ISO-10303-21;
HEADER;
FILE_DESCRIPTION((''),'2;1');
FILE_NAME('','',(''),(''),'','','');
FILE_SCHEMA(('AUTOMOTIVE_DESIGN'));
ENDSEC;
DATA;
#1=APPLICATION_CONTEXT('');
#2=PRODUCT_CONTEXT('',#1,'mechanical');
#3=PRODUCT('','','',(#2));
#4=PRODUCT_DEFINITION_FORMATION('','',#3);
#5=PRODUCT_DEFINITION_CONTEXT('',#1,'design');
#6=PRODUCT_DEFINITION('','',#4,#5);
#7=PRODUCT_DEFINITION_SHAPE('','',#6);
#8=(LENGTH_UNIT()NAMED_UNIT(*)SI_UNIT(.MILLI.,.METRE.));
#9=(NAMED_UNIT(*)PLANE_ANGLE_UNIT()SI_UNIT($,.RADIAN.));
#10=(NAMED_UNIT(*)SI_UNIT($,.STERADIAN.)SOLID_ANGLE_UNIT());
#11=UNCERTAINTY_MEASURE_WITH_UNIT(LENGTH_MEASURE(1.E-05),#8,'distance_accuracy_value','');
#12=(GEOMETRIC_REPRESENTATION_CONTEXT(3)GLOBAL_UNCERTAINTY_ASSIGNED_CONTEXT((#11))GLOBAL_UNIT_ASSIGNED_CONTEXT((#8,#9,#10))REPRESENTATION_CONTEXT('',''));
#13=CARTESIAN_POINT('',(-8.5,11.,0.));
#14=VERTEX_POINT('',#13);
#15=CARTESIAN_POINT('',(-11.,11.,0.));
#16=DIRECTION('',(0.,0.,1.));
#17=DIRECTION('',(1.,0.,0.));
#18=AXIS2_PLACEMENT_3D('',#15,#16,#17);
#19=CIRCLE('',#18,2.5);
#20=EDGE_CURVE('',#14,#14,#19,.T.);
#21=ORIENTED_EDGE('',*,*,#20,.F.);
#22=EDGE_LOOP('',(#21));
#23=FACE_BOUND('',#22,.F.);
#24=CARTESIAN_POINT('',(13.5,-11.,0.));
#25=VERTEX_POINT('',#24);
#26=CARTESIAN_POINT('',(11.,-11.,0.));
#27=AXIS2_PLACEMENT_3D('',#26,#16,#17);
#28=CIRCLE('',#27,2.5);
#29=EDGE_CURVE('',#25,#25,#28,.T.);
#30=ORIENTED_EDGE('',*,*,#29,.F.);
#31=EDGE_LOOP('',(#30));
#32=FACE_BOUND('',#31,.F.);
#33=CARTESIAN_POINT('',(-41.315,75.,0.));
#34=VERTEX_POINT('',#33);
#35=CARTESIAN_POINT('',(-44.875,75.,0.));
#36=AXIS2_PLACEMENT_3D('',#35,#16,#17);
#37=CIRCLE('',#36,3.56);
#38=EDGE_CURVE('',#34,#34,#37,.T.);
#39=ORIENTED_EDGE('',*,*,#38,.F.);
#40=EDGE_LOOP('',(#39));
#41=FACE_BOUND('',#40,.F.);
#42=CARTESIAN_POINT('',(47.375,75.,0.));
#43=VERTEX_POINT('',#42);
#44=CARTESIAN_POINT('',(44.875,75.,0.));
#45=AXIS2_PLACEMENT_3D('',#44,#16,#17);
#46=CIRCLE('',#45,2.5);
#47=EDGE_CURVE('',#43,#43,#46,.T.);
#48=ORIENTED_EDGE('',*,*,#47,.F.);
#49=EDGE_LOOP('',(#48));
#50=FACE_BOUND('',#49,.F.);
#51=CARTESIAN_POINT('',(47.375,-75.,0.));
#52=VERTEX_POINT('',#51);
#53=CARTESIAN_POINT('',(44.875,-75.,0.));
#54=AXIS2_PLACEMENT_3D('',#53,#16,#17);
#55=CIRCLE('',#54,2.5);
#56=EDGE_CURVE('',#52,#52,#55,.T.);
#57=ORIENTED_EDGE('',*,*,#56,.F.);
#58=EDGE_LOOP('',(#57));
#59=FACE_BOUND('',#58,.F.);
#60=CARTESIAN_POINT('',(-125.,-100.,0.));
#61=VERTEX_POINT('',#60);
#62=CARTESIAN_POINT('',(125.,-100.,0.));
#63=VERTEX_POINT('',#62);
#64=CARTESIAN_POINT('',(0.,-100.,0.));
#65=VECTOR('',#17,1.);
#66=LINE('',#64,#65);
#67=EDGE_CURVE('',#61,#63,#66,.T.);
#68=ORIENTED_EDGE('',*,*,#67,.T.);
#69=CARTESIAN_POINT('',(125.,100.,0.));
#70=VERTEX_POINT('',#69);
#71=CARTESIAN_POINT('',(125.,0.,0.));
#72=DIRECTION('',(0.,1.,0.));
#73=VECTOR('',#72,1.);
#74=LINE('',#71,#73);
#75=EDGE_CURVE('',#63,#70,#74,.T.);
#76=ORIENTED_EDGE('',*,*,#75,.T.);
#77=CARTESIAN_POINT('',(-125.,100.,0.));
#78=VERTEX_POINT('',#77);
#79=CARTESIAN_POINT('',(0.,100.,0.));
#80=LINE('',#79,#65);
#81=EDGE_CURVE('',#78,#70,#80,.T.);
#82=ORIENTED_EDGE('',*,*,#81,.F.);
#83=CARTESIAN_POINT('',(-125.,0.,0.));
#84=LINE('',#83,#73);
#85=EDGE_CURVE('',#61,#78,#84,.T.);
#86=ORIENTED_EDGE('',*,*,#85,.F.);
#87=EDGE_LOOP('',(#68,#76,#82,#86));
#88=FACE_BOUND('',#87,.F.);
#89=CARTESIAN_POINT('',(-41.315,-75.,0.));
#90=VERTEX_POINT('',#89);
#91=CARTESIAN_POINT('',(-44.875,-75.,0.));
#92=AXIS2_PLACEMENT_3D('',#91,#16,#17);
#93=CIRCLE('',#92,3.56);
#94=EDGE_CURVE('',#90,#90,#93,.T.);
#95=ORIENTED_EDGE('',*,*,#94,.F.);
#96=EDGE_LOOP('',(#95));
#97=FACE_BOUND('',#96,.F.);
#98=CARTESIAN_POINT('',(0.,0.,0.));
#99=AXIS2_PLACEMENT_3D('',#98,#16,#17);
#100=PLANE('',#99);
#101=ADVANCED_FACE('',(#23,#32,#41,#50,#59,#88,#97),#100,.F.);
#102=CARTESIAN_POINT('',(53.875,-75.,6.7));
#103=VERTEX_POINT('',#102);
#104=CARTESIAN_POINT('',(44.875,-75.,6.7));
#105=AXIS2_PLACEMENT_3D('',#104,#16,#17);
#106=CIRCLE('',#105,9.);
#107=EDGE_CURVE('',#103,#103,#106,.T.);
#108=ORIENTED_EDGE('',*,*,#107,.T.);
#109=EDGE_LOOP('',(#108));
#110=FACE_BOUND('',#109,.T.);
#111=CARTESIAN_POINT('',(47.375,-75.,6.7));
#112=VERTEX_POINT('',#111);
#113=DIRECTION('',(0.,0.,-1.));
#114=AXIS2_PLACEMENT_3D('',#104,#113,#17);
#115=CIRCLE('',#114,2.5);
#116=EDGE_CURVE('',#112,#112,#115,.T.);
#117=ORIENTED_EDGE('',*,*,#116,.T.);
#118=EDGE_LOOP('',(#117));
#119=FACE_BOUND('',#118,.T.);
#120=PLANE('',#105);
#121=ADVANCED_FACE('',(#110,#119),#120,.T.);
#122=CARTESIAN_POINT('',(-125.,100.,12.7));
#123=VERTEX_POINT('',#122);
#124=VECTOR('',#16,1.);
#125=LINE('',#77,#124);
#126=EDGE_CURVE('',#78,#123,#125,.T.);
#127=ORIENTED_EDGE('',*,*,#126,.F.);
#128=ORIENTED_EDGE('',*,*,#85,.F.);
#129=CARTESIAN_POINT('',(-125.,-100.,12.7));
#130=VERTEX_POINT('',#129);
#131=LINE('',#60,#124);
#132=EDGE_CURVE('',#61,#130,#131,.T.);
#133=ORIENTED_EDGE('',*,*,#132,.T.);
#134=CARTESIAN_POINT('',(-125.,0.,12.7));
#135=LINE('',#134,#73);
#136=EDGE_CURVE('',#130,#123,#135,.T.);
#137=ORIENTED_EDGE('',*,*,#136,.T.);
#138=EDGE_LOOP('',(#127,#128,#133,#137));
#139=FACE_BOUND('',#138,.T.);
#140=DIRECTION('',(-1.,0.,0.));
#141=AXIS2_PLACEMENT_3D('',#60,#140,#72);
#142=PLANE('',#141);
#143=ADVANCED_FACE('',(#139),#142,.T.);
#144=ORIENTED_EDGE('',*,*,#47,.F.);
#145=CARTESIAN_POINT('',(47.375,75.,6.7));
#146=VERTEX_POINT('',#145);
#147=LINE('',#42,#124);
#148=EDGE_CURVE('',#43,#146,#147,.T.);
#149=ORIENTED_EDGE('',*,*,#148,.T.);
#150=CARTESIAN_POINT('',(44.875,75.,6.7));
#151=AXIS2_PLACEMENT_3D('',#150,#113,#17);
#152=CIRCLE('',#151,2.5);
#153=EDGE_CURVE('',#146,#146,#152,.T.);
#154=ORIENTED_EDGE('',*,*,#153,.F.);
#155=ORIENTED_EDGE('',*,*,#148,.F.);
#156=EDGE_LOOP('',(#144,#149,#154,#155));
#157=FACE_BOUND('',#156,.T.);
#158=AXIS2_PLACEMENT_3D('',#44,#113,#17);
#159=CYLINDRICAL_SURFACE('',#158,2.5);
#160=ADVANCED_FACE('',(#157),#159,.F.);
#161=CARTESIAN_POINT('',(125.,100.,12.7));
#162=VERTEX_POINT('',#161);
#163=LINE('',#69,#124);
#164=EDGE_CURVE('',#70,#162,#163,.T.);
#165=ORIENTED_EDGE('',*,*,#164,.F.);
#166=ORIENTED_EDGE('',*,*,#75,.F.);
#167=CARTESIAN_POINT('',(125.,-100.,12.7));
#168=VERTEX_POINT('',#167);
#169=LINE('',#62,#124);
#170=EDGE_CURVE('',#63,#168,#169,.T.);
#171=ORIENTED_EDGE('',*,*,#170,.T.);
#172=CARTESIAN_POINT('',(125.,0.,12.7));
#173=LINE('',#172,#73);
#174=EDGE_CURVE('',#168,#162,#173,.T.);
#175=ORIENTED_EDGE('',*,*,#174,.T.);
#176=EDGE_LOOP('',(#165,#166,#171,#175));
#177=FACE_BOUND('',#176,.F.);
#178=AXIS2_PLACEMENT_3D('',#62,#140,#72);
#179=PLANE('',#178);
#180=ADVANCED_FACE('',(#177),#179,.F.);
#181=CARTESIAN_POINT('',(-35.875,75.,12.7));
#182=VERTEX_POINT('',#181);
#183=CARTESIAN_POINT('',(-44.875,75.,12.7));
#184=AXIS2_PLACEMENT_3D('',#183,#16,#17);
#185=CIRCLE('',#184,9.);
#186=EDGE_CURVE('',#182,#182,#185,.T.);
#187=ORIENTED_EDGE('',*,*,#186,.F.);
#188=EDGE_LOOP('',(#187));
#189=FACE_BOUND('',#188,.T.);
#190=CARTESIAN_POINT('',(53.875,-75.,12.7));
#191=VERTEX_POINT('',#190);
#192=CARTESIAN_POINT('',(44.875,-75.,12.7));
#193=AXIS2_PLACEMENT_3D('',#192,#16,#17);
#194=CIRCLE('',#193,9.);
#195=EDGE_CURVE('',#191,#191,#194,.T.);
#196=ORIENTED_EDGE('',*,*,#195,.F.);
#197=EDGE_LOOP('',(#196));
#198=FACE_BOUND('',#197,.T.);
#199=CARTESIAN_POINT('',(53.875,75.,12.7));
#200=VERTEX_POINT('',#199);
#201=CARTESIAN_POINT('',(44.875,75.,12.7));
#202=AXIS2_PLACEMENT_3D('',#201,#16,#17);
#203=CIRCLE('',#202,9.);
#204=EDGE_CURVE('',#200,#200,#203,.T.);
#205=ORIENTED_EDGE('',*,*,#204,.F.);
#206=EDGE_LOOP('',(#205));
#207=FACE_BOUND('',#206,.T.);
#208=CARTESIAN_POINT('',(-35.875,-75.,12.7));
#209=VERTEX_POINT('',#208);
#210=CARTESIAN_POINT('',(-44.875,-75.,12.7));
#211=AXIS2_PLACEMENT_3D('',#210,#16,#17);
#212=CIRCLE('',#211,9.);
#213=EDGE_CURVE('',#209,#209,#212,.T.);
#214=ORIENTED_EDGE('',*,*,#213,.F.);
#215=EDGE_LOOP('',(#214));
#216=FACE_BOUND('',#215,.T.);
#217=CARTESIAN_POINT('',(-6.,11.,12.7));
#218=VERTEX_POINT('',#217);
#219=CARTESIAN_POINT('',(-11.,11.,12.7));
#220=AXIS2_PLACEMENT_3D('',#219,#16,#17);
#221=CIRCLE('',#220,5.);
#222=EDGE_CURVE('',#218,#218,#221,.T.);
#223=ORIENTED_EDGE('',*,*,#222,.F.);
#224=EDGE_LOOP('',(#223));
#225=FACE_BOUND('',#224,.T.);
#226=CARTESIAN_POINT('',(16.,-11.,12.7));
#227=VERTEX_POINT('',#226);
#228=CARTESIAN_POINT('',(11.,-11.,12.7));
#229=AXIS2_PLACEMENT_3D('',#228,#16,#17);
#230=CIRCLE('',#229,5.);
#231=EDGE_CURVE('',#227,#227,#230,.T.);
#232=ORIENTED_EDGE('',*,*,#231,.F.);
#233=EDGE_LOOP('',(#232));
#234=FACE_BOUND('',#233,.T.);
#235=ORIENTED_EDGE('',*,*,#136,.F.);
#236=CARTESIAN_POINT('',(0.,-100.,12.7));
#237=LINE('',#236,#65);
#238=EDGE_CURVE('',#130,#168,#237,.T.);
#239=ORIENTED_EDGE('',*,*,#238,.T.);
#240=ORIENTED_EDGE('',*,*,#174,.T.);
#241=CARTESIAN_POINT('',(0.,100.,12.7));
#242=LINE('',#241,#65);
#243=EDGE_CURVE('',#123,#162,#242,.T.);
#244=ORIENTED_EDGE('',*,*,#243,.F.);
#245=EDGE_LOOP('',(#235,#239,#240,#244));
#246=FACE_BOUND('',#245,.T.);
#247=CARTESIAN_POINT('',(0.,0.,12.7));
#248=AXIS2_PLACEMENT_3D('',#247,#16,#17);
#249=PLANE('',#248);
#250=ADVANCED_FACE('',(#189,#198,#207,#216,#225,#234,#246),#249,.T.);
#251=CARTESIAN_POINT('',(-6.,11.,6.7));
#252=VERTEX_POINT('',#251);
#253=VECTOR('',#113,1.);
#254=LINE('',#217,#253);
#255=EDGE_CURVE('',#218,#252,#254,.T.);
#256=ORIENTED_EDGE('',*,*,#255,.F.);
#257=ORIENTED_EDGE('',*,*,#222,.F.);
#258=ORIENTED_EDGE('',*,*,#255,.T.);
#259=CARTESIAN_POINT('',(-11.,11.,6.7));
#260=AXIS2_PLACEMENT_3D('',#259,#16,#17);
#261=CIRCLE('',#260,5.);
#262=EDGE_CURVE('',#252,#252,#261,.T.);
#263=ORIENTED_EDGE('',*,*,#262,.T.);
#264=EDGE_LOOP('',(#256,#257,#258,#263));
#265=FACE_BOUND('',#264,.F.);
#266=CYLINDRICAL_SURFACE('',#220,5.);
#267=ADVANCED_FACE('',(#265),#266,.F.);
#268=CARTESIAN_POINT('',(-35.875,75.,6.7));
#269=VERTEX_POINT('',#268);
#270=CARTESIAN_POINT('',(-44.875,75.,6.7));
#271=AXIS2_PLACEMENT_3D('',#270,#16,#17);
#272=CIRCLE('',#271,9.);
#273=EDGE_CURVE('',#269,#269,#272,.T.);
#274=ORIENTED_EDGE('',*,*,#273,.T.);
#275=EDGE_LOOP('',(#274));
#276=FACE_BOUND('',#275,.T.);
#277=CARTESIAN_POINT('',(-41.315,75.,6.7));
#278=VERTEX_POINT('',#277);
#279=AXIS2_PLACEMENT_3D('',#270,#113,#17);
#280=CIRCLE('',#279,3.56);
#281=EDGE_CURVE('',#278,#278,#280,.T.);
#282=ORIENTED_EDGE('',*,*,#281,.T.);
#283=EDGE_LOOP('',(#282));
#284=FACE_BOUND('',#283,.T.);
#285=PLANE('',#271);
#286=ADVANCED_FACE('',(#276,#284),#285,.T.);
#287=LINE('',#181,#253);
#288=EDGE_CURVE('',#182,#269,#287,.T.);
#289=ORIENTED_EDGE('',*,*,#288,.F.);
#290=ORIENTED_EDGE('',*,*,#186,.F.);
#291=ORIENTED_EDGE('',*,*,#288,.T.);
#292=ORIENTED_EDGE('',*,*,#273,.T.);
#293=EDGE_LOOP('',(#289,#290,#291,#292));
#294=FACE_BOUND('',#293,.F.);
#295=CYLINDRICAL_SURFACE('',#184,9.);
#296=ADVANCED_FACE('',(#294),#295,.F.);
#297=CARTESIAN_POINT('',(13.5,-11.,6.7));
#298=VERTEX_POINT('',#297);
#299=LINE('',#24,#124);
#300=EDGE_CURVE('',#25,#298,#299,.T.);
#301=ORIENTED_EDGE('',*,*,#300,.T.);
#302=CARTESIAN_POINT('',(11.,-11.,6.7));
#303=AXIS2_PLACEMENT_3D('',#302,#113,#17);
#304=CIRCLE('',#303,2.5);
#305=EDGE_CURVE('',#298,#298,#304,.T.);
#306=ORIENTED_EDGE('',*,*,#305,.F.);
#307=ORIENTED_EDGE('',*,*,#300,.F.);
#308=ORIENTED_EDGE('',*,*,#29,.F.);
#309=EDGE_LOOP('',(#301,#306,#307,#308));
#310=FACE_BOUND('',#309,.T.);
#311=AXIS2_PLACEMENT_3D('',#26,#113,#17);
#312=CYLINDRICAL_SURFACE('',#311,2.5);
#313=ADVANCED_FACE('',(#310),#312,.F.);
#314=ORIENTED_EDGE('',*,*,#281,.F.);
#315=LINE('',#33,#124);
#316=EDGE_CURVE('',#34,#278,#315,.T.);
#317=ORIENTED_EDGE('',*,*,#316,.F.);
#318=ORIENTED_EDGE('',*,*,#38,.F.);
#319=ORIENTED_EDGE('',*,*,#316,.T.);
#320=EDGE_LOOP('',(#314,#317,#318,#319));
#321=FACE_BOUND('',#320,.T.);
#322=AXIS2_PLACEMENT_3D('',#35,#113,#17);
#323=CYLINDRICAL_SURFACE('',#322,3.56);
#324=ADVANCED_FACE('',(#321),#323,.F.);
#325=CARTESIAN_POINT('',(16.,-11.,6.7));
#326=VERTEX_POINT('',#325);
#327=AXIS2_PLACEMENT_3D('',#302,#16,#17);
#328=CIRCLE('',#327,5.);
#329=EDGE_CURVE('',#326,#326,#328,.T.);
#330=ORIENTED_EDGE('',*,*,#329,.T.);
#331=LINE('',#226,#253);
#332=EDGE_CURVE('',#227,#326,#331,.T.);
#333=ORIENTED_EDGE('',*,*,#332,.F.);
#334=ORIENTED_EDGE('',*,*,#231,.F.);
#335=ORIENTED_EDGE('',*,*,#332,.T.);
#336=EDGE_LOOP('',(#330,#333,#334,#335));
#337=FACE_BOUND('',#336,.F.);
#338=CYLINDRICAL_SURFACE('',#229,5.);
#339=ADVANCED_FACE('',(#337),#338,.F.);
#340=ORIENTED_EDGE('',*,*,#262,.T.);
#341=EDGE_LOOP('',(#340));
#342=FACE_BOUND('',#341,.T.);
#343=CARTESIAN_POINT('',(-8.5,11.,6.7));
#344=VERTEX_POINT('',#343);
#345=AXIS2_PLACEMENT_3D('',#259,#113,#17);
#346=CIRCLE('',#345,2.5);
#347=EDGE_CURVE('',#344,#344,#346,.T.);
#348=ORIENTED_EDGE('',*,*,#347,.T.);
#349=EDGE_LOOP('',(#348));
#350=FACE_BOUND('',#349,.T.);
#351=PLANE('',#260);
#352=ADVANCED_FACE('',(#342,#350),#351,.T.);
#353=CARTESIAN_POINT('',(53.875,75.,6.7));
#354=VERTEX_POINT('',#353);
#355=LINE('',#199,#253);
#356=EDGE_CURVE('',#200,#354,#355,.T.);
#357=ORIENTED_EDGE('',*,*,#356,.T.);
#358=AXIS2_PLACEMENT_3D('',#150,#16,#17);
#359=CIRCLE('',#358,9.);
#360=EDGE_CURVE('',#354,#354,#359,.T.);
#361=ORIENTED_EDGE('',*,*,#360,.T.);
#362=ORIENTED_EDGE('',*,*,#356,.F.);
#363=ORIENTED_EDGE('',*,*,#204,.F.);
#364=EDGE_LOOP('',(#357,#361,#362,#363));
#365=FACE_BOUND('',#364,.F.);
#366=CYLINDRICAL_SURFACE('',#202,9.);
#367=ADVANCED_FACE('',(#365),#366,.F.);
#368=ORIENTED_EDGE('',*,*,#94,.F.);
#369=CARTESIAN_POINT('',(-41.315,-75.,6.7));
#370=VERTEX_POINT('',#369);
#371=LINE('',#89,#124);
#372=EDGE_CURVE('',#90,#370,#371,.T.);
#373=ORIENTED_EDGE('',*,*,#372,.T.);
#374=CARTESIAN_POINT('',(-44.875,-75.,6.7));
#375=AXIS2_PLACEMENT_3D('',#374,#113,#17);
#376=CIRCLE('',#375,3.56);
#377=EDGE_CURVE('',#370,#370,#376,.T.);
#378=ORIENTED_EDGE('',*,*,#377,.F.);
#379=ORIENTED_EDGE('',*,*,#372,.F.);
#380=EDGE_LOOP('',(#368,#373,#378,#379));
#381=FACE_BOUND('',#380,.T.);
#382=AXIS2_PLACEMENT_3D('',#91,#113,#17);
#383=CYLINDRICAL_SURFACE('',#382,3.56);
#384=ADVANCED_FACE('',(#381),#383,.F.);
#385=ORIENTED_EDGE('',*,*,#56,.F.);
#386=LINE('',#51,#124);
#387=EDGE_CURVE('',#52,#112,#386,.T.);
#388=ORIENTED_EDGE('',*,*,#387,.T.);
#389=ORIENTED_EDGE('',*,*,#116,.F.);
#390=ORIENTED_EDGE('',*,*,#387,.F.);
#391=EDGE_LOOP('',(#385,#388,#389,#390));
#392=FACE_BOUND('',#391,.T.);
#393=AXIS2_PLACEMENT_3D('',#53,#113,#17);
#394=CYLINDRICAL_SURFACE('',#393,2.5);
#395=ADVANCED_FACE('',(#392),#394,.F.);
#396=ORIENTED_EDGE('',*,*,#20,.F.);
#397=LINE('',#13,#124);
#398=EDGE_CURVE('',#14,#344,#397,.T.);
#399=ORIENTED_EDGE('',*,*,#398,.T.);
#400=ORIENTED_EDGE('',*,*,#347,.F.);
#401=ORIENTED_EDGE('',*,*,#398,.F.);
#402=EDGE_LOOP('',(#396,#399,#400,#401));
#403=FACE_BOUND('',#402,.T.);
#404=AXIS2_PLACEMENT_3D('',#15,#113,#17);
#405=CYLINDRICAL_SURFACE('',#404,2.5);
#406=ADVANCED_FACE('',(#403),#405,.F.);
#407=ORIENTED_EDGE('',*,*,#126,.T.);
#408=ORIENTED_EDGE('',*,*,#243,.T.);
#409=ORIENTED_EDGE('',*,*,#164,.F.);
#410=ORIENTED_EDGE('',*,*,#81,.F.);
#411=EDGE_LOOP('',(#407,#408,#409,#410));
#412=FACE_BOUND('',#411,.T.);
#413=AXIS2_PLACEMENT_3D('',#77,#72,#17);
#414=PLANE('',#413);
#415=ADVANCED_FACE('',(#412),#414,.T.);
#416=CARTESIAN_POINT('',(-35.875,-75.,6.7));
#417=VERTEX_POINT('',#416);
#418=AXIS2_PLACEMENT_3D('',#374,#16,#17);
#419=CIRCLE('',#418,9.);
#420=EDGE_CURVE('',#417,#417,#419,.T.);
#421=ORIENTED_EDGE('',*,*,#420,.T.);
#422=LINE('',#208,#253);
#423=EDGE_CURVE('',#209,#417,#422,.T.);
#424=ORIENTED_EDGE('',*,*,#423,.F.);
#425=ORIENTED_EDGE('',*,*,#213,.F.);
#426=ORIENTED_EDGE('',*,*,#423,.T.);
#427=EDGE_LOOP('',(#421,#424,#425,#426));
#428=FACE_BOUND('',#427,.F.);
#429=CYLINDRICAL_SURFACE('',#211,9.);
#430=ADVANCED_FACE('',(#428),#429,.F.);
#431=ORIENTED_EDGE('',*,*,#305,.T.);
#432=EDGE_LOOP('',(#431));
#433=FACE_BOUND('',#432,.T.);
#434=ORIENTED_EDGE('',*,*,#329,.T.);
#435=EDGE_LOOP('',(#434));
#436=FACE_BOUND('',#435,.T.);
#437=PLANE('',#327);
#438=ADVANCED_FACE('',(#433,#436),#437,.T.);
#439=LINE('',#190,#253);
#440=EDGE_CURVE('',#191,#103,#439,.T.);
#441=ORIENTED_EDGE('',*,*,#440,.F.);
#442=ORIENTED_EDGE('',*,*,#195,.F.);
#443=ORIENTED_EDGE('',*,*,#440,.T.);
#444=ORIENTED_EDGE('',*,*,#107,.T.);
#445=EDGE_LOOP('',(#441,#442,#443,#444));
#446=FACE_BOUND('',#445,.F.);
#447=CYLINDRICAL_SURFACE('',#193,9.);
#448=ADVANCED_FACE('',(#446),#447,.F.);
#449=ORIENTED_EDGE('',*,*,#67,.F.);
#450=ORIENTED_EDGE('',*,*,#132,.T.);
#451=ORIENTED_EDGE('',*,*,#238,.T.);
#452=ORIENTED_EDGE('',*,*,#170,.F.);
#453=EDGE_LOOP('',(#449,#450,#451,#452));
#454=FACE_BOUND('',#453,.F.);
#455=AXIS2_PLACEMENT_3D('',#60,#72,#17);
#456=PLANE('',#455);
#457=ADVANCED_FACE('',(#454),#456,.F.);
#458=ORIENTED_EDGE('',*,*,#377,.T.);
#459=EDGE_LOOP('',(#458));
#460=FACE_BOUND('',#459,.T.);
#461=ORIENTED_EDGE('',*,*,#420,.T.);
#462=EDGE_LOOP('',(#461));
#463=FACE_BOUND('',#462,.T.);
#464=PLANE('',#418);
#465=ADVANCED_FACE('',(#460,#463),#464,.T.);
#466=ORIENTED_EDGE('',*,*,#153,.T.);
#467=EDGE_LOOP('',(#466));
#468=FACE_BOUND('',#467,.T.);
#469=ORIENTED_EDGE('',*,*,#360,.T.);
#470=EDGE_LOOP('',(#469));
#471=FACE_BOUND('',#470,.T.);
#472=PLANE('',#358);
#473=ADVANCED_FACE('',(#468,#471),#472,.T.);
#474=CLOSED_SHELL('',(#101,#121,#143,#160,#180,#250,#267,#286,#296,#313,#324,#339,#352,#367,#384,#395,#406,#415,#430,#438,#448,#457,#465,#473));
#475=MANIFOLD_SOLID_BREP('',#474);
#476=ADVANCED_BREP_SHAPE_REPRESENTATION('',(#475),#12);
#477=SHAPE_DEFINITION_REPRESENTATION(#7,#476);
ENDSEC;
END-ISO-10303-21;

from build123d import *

# Parameters (mm, degrees)
F0_W     = 250
F0_H     = 200
F0_R     = 3.56
F0_R_2   = 2.5
F1_DEPTH = 12.7
F2_R     = 9
F2_R_2   = 5
F3_DEPTH = 6


# Not quite as in the source:
# - a length typed as a fraction of an inch, garbled in the dataset ("3 / 203.2 mm" for 3/8 in), is restored


with BuildPart() as f1:
    # F0 (on Top) → F1 (new body)
    with BuildSketch(Plane.XY):
        Rectangle(F0_W, F0_H)
        with Locations((-44.875, -75)):
            Circle(F0_R, mode=Mode.SUBTRACT)
        with Locations((44.875, -75)):
            Circle(F0_R_2, mode=Mode.SUBTRACT)
        with Locations((11, -11)):
            Circle(F0_R_2, mode=Mode.SUBTRACT)
        with Locations((-11, 11)):
            Circle(F0_R_2, mode=Mode.SUBTRACT)
        with Locations((-44.875, 75)):
            Circle(F0_R, mode=Mode.SUBTRACT)
        with Locations((44.875, 75)):
            Circle(F0_R_2, mode=Mode.SUBTRACT)
    extrude(amount=F1_DEPTH)

    # F2 (on face) → F3 (cut)
    with BuildSketch(Plane.XY.offset(12.7)):
        with Locations((-44.875, 75)):
            Circle(F2_R)
        with Locations((44.875, 75)):
            Circle(F2_R)
        with Locations((-44.875, -75)):
            Circle(F2_R)
        with Locations((44.875, -75)):
            Circle(F2_R)
        with Locations((-11, 11)):
            Circle(F2_R_2)
        with Locations((11, -11)):
            Circle(F2_R_2)
    extrude(amount=-F3_DEPTH, mode=Mode.SUBTRACT)


solid = f1.part
